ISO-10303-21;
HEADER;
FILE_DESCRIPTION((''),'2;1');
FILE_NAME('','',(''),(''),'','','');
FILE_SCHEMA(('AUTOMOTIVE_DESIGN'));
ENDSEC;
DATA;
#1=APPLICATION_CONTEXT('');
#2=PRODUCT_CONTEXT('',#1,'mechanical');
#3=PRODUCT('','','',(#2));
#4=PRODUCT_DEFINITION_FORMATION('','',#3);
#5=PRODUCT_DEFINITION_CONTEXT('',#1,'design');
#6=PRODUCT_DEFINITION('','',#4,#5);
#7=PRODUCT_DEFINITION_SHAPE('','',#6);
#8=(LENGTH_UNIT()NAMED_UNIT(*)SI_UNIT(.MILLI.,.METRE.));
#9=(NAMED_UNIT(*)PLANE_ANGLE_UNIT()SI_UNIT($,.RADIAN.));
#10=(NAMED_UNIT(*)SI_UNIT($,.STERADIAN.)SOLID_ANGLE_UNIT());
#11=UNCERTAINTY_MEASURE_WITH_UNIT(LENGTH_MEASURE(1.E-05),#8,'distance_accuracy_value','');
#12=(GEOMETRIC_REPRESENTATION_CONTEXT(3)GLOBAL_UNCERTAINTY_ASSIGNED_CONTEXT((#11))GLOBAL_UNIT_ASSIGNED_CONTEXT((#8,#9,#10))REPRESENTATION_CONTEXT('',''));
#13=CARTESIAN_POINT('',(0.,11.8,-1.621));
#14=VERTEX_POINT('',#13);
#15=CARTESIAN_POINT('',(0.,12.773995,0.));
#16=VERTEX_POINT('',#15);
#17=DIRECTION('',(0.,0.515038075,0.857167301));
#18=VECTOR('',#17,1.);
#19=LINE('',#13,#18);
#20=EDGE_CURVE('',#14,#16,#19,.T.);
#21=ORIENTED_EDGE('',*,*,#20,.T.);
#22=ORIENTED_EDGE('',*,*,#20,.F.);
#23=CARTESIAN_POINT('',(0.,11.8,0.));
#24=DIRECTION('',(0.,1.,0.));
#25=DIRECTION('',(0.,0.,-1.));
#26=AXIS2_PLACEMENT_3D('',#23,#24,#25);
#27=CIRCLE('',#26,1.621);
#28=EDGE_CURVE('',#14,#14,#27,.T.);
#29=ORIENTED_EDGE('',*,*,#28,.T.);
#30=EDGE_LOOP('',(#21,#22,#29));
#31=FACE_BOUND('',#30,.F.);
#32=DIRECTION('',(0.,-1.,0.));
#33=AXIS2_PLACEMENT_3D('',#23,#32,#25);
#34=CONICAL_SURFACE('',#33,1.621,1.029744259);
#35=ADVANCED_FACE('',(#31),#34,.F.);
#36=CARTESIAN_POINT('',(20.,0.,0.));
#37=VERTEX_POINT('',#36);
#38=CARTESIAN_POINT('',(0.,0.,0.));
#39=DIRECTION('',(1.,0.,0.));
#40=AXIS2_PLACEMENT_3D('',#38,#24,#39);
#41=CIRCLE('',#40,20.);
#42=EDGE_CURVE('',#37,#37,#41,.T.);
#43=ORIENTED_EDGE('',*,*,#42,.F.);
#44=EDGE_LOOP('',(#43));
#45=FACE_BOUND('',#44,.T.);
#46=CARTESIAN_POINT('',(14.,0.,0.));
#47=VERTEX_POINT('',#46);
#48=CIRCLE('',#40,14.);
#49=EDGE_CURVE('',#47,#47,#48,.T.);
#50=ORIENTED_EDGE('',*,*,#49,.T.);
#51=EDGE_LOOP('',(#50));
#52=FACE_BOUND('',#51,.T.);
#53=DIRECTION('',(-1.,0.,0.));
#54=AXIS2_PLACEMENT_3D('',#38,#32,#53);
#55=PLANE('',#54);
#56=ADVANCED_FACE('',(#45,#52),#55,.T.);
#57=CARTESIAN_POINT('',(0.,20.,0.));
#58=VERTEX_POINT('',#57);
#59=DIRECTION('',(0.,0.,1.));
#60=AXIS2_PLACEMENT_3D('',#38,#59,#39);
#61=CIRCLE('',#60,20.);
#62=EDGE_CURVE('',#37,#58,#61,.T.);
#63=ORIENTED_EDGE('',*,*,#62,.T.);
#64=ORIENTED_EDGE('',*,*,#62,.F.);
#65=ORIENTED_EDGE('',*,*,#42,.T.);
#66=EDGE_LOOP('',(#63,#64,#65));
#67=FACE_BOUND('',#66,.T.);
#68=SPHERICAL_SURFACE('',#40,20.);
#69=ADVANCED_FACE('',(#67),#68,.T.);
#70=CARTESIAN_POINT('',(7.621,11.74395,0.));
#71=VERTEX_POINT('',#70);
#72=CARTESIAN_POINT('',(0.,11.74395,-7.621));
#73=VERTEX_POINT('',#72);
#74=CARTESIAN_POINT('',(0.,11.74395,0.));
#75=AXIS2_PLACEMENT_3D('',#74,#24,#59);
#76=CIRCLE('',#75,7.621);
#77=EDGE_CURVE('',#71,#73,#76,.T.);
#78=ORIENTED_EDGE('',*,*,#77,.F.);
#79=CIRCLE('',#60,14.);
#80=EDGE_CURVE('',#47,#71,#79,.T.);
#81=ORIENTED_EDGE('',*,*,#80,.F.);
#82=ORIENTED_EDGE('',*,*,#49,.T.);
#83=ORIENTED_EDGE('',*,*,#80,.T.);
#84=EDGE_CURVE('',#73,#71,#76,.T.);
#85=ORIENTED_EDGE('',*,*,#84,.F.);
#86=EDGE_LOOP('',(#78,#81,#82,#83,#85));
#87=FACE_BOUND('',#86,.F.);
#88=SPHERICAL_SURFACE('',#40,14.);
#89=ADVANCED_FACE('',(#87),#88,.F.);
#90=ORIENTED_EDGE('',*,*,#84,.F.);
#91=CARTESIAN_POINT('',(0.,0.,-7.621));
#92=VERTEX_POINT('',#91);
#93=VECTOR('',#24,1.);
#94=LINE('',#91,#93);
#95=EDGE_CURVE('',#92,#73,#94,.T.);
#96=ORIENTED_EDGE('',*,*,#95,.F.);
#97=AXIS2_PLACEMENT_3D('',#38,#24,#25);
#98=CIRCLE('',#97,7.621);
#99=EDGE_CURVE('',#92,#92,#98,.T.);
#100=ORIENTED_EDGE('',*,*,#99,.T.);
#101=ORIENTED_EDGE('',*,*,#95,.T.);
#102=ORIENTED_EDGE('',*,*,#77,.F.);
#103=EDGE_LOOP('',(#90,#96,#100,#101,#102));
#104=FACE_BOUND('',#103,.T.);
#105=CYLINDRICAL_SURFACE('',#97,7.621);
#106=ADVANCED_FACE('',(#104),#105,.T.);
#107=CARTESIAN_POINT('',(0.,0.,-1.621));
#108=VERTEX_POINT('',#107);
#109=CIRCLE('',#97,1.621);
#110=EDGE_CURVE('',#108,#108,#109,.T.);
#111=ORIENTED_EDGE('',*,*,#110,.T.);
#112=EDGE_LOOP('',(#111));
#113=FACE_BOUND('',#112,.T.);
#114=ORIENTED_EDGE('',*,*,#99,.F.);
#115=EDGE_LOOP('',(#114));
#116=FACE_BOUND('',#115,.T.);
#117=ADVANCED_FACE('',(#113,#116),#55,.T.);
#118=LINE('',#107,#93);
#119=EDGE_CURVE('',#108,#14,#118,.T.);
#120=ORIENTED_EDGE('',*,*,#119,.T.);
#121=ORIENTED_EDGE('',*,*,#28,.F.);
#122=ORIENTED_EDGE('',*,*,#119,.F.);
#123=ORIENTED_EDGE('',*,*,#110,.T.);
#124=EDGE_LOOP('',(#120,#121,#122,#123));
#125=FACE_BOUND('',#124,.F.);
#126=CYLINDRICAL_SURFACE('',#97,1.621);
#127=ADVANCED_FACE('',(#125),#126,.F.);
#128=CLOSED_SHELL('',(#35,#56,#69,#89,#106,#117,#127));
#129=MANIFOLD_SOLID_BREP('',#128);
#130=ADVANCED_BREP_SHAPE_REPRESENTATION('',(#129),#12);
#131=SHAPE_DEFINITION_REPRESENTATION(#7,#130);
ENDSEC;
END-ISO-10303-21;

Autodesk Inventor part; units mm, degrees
ref_plane "YZ Plane" through (0, 0, 0) normal (1, 0, 0) x (0, 1, 0)
ref_plane "XZ Plane" through (0, 0, 0) normal (0, 1, 0) x (-1, 0, 0)
ref_plane "XY Plane" through (0, 0, 0) normal (0, 0, 1) x (1, 0, 0)
sketch "Sketch1" plane through (0, 0, 0) normal (0, 0, 1) x (1, 0, 0)
  line L0 (0, 0) -> (0, 20)
  line L1 (0, 0) -> (20, 0)
  arc A0 (20, 0) -> (0, 20) centre (0, 0) ccw
  line L2 (0, -4.8284) -> (0, 28.9706) projected
  dimension "d2" = 20
revolve "Revolution1" add sketch "Sketch1" angle 360 about axis through (0, -10, 0) along (0, 1, 0)
sketch "Sketch4" plane through (0, 0, 0) normal (0, -1, 0) x (1, 0, 0)
  point P0 (0, 0)
  point P1 (0, 0)
hole "Hole2" at (0, 0, 0) direction (0, 1, 0) diameter 3.242 depth 11.8 tip angle 118 thread size "M4x0.7" class "6H" standard "ANSI Metric M Profile"
shell "Shell2" thickness 6 removed faces 1 at (13.676, 0, 1.6606)
properties part number "Ball_Upper Half" material "Nylon 6/6"
